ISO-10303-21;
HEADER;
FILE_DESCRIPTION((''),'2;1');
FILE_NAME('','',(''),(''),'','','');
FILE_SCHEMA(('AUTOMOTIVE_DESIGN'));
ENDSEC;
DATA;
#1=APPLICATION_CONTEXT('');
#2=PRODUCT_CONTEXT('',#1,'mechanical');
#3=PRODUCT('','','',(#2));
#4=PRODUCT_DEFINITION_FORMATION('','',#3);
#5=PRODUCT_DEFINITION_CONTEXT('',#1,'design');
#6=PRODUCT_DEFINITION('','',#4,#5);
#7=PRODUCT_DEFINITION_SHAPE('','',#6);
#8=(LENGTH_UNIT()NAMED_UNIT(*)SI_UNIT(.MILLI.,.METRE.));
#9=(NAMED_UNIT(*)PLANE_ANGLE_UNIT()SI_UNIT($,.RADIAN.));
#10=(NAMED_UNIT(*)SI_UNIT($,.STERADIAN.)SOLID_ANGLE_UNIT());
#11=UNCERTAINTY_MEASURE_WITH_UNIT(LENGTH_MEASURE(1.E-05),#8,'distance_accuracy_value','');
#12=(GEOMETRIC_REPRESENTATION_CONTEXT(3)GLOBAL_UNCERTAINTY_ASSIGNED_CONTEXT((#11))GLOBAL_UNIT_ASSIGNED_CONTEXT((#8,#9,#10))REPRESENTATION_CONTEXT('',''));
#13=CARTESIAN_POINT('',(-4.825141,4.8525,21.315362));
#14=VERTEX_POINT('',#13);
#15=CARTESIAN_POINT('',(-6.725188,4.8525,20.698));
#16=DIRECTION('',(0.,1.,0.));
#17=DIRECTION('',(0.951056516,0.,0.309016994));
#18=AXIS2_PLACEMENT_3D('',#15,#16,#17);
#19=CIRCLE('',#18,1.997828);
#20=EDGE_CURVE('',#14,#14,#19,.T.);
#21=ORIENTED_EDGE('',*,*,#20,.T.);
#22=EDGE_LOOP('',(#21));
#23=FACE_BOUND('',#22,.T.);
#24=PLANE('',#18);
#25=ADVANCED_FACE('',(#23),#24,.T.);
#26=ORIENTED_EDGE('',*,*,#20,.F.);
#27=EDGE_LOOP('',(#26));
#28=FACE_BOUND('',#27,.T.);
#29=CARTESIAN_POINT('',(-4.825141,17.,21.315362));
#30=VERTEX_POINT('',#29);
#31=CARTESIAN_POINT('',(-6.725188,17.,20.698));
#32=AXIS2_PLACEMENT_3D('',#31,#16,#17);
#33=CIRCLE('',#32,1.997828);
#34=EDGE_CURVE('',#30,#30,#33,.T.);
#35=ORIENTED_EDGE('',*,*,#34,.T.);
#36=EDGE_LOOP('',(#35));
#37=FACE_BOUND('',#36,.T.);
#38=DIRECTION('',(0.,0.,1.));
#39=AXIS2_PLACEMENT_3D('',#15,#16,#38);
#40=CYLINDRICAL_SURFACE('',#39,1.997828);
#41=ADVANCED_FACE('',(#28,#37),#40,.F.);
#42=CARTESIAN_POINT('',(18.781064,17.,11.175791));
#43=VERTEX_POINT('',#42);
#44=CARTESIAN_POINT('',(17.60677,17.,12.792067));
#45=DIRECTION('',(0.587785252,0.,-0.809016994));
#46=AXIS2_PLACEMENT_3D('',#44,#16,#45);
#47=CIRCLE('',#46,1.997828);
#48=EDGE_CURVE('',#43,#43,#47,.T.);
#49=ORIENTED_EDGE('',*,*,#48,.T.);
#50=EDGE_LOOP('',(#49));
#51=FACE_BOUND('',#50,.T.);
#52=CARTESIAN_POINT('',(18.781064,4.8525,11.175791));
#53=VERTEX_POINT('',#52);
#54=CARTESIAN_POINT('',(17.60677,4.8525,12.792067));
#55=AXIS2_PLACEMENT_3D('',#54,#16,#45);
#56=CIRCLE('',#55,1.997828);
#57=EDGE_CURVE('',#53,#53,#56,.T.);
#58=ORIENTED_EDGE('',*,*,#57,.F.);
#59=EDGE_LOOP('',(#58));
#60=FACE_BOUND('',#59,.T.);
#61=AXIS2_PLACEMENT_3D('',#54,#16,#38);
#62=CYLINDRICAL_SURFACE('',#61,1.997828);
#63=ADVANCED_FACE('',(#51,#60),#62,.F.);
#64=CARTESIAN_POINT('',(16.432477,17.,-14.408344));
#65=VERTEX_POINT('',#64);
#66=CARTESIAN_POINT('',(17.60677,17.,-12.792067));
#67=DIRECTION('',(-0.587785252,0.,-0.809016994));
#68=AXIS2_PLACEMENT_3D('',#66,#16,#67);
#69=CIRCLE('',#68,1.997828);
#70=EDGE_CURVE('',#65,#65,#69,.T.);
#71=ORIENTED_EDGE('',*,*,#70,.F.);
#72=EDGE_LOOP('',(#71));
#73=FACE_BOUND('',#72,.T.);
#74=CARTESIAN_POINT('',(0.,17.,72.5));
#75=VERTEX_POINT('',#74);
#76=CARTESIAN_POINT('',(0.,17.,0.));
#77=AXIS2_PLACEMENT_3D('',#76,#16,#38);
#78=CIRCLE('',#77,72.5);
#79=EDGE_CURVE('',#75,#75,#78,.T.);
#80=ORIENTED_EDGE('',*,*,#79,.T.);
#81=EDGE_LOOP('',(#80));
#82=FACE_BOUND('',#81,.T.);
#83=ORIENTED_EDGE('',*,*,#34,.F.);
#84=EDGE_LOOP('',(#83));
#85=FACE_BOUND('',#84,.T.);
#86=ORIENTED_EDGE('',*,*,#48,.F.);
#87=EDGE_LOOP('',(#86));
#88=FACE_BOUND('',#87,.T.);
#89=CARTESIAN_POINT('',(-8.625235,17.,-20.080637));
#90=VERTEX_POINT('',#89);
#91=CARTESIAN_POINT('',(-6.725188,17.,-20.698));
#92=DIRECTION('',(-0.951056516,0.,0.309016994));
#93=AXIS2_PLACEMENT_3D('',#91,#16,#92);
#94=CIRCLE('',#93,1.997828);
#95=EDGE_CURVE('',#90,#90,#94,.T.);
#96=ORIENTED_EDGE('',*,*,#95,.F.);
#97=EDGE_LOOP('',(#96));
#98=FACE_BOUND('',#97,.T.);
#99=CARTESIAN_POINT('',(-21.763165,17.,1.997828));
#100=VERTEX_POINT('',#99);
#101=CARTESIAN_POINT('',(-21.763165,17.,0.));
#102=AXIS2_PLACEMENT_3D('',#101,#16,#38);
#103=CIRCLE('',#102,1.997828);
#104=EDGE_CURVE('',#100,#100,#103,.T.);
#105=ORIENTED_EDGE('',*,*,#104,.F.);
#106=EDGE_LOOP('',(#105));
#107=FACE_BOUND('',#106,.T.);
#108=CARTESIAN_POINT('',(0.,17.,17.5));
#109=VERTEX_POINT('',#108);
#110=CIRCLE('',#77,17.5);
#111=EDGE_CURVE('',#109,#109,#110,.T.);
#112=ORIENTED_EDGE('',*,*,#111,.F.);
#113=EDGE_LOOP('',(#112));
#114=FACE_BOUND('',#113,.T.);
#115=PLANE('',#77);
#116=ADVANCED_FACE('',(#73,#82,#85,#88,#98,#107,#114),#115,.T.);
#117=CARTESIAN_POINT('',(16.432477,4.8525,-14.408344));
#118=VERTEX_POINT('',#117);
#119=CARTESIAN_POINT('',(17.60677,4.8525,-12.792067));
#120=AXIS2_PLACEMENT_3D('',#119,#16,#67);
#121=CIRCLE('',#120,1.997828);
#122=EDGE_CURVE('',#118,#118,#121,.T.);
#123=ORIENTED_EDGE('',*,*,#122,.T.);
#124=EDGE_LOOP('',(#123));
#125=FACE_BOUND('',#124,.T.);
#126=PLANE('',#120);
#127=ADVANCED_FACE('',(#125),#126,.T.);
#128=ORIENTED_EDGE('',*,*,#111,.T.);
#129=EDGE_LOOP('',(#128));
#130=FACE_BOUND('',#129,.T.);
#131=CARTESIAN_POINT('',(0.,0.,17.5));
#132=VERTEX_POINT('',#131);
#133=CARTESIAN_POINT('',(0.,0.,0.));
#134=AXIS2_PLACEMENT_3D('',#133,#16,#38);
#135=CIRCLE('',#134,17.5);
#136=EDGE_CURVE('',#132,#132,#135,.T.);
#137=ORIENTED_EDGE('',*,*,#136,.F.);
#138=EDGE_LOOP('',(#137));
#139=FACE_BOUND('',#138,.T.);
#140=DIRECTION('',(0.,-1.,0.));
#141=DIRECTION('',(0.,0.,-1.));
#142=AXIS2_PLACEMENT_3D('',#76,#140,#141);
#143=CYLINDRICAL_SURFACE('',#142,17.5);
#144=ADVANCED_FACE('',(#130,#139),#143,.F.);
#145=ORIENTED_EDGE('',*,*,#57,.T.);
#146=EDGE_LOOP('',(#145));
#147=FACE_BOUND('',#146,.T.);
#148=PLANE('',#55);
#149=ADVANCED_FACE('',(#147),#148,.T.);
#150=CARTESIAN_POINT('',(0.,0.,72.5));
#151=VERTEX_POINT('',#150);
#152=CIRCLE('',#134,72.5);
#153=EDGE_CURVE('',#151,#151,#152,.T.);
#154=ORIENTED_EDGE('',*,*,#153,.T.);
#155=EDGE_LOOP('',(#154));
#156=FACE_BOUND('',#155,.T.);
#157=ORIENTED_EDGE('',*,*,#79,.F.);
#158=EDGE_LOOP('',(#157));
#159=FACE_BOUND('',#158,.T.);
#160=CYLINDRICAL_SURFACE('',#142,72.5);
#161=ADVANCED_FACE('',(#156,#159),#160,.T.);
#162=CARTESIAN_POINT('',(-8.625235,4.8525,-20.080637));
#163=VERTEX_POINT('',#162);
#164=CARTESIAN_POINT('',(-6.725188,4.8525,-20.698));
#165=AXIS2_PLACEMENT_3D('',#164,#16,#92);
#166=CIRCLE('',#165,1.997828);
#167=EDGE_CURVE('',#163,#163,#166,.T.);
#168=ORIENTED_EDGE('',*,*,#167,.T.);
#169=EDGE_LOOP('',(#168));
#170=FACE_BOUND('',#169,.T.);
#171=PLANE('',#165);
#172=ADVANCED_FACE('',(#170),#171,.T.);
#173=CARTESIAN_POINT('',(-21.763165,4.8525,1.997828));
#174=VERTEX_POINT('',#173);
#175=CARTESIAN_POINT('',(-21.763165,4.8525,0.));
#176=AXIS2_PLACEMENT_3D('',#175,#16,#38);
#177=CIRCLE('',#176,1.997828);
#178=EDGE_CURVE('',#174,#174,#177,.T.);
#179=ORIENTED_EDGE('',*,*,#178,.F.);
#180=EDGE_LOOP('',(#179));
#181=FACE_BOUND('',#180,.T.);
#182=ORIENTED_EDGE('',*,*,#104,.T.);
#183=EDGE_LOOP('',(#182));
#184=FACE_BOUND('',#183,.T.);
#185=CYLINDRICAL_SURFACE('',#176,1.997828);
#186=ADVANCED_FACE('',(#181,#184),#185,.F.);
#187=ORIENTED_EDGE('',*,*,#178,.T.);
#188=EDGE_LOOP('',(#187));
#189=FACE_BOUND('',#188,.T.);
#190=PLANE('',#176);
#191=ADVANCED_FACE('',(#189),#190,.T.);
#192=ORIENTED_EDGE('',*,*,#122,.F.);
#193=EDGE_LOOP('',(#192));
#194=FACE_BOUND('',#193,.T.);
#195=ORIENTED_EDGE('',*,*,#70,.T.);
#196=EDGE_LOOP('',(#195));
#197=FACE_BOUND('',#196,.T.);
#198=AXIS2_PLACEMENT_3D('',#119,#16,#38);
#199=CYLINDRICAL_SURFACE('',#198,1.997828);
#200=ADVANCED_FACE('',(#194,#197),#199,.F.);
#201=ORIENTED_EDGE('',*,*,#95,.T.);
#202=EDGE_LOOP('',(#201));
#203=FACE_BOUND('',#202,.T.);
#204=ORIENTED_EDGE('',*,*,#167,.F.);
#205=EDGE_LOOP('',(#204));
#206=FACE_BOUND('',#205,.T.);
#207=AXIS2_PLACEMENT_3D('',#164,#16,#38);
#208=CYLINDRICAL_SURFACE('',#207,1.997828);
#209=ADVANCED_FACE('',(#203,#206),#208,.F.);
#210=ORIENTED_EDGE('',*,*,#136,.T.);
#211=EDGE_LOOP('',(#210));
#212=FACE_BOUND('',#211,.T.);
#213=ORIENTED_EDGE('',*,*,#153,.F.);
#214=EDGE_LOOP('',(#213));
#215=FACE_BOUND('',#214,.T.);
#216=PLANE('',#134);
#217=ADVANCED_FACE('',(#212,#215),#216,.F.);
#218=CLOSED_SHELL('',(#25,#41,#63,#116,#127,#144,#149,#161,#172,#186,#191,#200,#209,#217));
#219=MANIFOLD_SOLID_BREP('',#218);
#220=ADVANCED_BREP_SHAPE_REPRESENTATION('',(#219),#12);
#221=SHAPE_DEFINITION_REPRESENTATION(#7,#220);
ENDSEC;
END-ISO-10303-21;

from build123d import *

# Parameters (mm, degrees)
SKETCH1_R           = 72.5
BOSS_EXTRUDE1_DEPTH = 17
SKETCH2_R           = 17.5
CUT_EXTRUDE1_DEPTH  = 104.930265082
SKETCH3_R           = 1.997827515
CUT_EXTRUDE2_DEPTH  = 12.147500007
CIRPATTERN1_COUNT   = 5


with BuildPart() as part:
    # Sketch1 → Boss-Extrude1 (new body)
    with BuildSketch(Plane(origin=(0, 0, 0), x_dir=(1, 0, 0), z_dir=(0, 1, 0))):
        Circle(SKETCH1_R)
    extrude(amount=BOSS_EXTRUDE1_DEPTH)

    # Sketch2 → Cut-Extrude1 (cut, through all)
    with BuildSketch(Plane(origin=(0, 0, 0), x_dir=(1, 0, 0), z_dir=(0, 1, 0))):
        Circle(SKETCH2_R)
    extrude(amount=CUT_EXTRUDE1_DEPTH, mode=Mode.SUBTRACT)

    # Sketch3 → Cut-Extrude2 (cut)
    with BuildSketch(Plane(origin=(0, 17, 0), x_dir=(1, 0, 0), z_dir=(0, 1, 0))):
        with Locations((-21.763164863, 0)):
            Circle(SKETCH3_R)
    cut_extrude2 = extrude(amount=-CUT_EXTRUDE2_DEPTH, mode=Mode.SUBTRACT)

    # CirPattern1: Cut-Extrude2 ×5 about axis
    cirpattern1_axis = Axis((0, 0, 0), (0, 1, 0))
    for i in range(1, CIRPATTERN1_COUNT):
        add(cut_extrude2.rotate(cirpattern1_axis, i * 360 / CIRPATTERN1_COUNT), mode=Mode.SUBTRACT)


solid = part.part
